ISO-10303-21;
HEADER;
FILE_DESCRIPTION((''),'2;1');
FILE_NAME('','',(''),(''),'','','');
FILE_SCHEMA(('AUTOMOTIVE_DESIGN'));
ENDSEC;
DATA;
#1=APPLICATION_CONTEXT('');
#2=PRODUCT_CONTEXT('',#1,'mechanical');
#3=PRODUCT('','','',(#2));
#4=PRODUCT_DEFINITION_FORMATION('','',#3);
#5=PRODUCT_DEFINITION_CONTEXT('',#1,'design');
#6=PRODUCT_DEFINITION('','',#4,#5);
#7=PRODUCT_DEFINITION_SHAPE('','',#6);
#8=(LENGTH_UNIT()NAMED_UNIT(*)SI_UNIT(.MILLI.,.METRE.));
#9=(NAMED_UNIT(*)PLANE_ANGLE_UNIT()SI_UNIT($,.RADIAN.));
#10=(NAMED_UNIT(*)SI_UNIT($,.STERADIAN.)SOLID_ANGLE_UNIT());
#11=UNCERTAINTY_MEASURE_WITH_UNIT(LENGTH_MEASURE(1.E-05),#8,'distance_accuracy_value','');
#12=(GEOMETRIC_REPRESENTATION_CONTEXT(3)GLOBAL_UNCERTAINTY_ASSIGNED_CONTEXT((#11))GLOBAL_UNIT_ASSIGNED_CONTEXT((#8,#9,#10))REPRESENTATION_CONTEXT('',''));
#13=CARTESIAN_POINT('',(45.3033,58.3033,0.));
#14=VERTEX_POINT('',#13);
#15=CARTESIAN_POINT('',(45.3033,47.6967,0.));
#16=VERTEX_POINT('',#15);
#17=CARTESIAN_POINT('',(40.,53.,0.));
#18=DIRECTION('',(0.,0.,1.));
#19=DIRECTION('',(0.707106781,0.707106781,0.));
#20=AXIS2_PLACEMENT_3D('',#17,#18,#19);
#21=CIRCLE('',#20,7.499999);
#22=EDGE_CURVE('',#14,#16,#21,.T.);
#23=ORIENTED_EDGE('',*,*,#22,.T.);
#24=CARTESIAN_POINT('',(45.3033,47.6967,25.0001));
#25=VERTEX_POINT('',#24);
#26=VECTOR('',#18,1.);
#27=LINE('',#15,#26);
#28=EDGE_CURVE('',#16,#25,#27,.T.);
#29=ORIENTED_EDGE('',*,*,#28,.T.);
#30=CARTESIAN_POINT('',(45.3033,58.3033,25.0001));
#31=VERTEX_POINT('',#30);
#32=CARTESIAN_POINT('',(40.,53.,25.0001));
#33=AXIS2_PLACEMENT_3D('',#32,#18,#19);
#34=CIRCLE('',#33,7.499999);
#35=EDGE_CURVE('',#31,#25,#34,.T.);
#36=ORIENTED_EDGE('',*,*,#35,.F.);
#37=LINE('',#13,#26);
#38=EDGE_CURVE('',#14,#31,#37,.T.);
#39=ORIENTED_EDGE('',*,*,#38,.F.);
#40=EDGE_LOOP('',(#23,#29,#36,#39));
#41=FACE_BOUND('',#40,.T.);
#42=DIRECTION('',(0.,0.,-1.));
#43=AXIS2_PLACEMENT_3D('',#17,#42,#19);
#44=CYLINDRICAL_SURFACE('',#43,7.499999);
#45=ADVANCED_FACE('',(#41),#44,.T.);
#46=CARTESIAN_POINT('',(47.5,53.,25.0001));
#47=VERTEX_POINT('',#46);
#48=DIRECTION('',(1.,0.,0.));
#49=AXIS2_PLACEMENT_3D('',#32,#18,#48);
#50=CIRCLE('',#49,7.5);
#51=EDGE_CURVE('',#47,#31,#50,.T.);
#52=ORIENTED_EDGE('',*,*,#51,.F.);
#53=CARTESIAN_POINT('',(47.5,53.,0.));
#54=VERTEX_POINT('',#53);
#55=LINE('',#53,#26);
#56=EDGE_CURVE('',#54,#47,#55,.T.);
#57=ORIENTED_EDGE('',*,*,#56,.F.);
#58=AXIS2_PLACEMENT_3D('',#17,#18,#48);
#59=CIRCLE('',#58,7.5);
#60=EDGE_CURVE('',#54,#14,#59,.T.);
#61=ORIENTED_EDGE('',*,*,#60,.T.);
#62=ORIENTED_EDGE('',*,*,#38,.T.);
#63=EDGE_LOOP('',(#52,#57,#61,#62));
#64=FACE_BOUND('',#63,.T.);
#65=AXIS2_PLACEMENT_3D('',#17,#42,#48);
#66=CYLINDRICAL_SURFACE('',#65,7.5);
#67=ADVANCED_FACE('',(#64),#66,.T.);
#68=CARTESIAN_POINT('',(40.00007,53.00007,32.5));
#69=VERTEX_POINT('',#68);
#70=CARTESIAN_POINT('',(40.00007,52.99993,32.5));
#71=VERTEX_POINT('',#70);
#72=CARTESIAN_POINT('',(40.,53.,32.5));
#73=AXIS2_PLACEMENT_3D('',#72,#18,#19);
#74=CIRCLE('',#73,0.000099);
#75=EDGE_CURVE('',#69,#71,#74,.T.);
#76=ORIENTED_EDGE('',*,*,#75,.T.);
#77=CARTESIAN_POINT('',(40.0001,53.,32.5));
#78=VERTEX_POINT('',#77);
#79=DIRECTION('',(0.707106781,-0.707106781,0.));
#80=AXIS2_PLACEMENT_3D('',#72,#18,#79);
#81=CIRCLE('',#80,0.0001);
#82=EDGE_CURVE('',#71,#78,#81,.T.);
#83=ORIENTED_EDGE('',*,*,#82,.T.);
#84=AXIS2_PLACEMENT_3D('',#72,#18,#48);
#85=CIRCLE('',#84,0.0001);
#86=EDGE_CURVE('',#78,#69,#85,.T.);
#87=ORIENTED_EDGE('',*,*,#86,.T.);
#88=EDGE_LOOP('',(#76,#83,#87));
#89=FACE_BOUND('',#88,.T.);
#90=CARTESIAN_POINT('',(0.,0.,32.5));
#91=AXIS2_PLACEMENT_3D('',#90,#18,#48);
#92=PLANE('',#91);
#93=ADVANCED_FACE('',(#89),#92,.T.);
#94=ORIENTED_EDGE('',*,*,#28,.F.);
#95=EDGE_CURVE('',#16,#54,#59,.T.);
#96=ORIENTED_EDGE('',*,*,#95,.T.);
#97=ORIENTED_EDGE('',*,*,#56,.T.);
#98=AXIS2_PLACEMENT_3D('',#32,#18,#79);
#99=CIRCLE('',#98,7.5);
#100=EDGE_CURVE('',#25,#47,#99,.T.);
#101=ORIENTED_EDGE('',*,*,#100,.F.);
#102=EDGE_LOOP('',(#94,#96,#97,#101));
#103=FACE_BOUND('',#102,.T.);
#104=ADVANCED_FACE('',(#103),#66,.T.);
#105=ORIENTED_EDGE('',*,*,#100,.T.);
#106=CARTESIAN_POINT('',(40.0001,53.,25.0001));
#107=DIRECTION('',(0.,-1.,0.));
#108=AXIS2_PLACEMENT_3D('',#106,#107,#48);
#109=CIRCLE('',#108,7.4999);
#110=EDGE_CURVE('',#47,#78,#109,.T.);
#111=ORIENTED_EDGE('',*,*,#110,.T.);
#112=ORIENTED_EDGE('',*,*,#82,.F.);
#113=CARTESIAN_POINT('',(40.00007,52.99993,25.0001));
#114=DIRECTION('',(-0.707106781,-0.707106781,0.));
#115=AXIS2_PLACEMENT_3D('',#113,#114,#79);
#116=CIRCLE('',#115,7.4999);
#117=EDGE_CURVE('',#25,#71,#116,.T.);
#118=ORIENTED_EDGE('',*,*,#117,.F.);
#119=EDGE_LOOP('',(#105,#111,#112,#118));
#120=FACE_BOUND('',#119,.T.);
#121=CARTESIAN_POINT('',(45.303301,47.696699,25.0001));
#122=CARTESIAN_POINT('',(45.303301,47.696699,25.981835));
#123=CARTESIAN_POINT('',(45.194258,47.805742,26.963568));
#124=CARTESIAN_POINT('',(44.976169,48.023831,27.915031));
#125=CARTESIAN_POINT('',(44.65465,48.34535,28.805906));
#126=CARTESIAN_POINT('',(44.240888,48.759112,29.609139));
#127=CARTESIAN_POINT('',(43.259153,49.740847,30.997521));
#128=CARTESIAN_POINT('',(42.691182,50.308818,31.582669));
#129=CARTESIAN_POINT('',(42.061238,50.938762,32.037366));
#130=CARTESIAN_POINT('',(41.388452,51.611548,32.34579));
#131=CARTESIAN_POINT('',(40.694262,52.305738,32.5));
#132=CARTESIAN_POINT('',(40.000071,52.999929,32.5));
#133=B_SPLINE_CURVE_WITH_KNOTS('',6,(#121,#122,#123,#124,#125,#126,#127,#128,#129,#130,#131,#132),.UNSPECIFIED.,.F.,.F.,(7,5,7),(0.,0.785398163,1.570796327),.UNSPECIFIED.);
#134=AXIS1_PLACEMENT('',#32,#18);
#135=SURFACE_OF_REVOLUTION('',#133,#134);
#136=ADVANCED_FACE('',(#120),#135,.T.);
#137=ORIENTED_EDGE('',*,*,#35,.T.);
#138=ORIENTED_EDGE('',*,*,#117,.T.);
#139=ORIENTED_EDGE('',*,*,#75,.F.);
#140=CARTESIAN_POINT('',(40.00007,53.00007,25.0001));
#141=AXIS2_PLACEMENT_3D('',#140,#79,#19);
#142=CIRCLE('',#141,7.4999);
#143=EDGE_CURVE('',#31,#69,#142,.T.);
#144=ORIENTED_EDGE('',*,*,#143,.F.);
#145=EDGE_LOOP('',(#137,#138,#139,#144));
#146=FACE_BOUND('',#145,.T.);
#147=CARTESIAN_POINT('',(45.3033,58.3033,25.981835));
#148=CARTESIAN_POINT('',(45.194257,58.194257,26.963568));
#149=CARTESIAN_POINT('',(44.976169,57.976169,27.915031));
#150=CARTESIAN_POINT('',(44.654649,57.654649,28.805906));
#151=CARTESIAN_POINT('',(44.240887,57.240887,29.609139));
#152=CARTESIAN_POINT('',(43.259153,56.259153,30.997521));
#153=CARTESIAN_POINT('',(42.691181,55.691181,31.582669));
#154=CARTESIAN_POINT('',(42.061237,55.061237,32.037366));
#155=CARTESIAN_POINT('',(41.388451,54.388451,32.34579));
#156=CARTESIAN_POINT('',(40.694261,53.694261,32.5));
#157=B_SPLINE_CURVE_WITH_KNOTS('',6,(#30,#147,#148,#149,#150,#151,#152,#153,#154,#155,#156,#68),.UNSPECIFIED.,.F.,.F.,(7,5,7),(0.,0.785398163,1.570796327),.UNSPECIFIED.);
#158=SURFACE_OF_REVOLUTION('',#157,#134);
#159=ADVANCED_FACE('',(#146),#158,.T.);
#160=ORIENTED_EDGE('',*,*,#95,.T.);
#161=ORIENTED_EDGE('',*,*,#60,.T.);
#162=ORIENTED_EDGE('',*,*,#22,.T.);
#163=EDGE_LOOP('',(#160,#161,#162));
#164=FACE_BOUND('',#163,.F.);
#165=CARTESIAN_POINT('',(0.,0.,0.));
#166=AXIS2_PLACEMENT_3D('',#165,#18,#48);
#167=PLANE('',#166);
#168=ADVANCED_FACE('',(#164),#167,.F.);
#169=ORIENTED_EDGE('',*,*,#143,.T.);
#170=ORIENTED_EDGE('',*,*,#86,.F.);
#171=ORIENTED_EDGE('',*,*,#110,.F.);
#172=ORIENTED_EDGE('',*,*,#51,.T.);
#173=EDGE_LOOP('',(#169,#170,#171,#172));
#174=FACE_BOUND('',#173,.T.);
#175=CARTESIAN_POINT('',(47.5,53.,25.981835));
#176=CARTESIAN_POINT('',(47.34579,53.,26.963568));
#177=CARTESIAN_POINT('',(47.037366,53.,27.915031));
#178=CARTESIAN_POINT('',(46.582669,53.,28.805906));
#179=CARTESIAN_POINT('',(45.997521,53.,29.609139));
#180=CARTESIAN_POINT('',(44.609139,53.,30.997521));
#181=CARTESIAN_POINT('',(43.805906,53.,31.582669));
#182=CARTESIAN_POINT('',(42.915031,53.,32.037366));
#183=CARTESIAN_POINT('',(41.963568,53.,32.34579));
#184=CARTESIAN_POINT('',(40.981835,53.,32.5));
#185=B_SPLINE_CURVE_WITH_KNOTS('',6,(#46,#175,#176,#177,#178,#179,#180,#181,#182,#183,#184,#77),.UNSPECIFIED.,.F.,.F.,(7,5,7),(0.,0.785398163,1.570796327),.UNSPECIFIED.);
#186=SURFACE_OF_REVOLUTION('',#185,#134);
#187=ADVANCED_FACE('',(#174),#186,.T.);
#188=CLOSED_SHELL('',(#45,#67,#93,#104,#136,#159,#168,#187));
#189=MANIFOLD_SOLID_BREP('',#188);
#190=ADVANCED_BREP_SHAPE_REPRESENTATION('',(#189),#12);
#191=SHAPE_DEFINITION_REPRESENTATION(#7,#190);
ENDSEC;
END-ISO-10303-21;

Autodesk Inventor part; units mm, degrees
ref_plane "YZ Plane" through (0, 0, 0) normal (1, 0, 0) x (0, 1, 0)
ref_plane "XZ Plane" through (0, 0, 0) normal (0, 1, 0) x (-1, 0, 0)
ref_plane "XY Plane" through (0, 0, 0) normal (0, 0, 1) x (1, 0, 0)
sketch "Sketch1" plane through (0, 0, 0) normal (0, 0, 1) x (1, 0, 0)
  arc A0 (45.3033, 58.3033) -> (45.3033, 47.6967) centre (40, 53) ccw projected
  circle A1 centre (40, 53) radius 7.5
  point P0 (0, 0)
extrude "Extrusion1" add sketch "Sketch1" along normal blind 32.5
fillet "Fillet1" radius 7.5 1 edges at (32.5, 53, 32.5)
properties part number "NotchPiston1"
